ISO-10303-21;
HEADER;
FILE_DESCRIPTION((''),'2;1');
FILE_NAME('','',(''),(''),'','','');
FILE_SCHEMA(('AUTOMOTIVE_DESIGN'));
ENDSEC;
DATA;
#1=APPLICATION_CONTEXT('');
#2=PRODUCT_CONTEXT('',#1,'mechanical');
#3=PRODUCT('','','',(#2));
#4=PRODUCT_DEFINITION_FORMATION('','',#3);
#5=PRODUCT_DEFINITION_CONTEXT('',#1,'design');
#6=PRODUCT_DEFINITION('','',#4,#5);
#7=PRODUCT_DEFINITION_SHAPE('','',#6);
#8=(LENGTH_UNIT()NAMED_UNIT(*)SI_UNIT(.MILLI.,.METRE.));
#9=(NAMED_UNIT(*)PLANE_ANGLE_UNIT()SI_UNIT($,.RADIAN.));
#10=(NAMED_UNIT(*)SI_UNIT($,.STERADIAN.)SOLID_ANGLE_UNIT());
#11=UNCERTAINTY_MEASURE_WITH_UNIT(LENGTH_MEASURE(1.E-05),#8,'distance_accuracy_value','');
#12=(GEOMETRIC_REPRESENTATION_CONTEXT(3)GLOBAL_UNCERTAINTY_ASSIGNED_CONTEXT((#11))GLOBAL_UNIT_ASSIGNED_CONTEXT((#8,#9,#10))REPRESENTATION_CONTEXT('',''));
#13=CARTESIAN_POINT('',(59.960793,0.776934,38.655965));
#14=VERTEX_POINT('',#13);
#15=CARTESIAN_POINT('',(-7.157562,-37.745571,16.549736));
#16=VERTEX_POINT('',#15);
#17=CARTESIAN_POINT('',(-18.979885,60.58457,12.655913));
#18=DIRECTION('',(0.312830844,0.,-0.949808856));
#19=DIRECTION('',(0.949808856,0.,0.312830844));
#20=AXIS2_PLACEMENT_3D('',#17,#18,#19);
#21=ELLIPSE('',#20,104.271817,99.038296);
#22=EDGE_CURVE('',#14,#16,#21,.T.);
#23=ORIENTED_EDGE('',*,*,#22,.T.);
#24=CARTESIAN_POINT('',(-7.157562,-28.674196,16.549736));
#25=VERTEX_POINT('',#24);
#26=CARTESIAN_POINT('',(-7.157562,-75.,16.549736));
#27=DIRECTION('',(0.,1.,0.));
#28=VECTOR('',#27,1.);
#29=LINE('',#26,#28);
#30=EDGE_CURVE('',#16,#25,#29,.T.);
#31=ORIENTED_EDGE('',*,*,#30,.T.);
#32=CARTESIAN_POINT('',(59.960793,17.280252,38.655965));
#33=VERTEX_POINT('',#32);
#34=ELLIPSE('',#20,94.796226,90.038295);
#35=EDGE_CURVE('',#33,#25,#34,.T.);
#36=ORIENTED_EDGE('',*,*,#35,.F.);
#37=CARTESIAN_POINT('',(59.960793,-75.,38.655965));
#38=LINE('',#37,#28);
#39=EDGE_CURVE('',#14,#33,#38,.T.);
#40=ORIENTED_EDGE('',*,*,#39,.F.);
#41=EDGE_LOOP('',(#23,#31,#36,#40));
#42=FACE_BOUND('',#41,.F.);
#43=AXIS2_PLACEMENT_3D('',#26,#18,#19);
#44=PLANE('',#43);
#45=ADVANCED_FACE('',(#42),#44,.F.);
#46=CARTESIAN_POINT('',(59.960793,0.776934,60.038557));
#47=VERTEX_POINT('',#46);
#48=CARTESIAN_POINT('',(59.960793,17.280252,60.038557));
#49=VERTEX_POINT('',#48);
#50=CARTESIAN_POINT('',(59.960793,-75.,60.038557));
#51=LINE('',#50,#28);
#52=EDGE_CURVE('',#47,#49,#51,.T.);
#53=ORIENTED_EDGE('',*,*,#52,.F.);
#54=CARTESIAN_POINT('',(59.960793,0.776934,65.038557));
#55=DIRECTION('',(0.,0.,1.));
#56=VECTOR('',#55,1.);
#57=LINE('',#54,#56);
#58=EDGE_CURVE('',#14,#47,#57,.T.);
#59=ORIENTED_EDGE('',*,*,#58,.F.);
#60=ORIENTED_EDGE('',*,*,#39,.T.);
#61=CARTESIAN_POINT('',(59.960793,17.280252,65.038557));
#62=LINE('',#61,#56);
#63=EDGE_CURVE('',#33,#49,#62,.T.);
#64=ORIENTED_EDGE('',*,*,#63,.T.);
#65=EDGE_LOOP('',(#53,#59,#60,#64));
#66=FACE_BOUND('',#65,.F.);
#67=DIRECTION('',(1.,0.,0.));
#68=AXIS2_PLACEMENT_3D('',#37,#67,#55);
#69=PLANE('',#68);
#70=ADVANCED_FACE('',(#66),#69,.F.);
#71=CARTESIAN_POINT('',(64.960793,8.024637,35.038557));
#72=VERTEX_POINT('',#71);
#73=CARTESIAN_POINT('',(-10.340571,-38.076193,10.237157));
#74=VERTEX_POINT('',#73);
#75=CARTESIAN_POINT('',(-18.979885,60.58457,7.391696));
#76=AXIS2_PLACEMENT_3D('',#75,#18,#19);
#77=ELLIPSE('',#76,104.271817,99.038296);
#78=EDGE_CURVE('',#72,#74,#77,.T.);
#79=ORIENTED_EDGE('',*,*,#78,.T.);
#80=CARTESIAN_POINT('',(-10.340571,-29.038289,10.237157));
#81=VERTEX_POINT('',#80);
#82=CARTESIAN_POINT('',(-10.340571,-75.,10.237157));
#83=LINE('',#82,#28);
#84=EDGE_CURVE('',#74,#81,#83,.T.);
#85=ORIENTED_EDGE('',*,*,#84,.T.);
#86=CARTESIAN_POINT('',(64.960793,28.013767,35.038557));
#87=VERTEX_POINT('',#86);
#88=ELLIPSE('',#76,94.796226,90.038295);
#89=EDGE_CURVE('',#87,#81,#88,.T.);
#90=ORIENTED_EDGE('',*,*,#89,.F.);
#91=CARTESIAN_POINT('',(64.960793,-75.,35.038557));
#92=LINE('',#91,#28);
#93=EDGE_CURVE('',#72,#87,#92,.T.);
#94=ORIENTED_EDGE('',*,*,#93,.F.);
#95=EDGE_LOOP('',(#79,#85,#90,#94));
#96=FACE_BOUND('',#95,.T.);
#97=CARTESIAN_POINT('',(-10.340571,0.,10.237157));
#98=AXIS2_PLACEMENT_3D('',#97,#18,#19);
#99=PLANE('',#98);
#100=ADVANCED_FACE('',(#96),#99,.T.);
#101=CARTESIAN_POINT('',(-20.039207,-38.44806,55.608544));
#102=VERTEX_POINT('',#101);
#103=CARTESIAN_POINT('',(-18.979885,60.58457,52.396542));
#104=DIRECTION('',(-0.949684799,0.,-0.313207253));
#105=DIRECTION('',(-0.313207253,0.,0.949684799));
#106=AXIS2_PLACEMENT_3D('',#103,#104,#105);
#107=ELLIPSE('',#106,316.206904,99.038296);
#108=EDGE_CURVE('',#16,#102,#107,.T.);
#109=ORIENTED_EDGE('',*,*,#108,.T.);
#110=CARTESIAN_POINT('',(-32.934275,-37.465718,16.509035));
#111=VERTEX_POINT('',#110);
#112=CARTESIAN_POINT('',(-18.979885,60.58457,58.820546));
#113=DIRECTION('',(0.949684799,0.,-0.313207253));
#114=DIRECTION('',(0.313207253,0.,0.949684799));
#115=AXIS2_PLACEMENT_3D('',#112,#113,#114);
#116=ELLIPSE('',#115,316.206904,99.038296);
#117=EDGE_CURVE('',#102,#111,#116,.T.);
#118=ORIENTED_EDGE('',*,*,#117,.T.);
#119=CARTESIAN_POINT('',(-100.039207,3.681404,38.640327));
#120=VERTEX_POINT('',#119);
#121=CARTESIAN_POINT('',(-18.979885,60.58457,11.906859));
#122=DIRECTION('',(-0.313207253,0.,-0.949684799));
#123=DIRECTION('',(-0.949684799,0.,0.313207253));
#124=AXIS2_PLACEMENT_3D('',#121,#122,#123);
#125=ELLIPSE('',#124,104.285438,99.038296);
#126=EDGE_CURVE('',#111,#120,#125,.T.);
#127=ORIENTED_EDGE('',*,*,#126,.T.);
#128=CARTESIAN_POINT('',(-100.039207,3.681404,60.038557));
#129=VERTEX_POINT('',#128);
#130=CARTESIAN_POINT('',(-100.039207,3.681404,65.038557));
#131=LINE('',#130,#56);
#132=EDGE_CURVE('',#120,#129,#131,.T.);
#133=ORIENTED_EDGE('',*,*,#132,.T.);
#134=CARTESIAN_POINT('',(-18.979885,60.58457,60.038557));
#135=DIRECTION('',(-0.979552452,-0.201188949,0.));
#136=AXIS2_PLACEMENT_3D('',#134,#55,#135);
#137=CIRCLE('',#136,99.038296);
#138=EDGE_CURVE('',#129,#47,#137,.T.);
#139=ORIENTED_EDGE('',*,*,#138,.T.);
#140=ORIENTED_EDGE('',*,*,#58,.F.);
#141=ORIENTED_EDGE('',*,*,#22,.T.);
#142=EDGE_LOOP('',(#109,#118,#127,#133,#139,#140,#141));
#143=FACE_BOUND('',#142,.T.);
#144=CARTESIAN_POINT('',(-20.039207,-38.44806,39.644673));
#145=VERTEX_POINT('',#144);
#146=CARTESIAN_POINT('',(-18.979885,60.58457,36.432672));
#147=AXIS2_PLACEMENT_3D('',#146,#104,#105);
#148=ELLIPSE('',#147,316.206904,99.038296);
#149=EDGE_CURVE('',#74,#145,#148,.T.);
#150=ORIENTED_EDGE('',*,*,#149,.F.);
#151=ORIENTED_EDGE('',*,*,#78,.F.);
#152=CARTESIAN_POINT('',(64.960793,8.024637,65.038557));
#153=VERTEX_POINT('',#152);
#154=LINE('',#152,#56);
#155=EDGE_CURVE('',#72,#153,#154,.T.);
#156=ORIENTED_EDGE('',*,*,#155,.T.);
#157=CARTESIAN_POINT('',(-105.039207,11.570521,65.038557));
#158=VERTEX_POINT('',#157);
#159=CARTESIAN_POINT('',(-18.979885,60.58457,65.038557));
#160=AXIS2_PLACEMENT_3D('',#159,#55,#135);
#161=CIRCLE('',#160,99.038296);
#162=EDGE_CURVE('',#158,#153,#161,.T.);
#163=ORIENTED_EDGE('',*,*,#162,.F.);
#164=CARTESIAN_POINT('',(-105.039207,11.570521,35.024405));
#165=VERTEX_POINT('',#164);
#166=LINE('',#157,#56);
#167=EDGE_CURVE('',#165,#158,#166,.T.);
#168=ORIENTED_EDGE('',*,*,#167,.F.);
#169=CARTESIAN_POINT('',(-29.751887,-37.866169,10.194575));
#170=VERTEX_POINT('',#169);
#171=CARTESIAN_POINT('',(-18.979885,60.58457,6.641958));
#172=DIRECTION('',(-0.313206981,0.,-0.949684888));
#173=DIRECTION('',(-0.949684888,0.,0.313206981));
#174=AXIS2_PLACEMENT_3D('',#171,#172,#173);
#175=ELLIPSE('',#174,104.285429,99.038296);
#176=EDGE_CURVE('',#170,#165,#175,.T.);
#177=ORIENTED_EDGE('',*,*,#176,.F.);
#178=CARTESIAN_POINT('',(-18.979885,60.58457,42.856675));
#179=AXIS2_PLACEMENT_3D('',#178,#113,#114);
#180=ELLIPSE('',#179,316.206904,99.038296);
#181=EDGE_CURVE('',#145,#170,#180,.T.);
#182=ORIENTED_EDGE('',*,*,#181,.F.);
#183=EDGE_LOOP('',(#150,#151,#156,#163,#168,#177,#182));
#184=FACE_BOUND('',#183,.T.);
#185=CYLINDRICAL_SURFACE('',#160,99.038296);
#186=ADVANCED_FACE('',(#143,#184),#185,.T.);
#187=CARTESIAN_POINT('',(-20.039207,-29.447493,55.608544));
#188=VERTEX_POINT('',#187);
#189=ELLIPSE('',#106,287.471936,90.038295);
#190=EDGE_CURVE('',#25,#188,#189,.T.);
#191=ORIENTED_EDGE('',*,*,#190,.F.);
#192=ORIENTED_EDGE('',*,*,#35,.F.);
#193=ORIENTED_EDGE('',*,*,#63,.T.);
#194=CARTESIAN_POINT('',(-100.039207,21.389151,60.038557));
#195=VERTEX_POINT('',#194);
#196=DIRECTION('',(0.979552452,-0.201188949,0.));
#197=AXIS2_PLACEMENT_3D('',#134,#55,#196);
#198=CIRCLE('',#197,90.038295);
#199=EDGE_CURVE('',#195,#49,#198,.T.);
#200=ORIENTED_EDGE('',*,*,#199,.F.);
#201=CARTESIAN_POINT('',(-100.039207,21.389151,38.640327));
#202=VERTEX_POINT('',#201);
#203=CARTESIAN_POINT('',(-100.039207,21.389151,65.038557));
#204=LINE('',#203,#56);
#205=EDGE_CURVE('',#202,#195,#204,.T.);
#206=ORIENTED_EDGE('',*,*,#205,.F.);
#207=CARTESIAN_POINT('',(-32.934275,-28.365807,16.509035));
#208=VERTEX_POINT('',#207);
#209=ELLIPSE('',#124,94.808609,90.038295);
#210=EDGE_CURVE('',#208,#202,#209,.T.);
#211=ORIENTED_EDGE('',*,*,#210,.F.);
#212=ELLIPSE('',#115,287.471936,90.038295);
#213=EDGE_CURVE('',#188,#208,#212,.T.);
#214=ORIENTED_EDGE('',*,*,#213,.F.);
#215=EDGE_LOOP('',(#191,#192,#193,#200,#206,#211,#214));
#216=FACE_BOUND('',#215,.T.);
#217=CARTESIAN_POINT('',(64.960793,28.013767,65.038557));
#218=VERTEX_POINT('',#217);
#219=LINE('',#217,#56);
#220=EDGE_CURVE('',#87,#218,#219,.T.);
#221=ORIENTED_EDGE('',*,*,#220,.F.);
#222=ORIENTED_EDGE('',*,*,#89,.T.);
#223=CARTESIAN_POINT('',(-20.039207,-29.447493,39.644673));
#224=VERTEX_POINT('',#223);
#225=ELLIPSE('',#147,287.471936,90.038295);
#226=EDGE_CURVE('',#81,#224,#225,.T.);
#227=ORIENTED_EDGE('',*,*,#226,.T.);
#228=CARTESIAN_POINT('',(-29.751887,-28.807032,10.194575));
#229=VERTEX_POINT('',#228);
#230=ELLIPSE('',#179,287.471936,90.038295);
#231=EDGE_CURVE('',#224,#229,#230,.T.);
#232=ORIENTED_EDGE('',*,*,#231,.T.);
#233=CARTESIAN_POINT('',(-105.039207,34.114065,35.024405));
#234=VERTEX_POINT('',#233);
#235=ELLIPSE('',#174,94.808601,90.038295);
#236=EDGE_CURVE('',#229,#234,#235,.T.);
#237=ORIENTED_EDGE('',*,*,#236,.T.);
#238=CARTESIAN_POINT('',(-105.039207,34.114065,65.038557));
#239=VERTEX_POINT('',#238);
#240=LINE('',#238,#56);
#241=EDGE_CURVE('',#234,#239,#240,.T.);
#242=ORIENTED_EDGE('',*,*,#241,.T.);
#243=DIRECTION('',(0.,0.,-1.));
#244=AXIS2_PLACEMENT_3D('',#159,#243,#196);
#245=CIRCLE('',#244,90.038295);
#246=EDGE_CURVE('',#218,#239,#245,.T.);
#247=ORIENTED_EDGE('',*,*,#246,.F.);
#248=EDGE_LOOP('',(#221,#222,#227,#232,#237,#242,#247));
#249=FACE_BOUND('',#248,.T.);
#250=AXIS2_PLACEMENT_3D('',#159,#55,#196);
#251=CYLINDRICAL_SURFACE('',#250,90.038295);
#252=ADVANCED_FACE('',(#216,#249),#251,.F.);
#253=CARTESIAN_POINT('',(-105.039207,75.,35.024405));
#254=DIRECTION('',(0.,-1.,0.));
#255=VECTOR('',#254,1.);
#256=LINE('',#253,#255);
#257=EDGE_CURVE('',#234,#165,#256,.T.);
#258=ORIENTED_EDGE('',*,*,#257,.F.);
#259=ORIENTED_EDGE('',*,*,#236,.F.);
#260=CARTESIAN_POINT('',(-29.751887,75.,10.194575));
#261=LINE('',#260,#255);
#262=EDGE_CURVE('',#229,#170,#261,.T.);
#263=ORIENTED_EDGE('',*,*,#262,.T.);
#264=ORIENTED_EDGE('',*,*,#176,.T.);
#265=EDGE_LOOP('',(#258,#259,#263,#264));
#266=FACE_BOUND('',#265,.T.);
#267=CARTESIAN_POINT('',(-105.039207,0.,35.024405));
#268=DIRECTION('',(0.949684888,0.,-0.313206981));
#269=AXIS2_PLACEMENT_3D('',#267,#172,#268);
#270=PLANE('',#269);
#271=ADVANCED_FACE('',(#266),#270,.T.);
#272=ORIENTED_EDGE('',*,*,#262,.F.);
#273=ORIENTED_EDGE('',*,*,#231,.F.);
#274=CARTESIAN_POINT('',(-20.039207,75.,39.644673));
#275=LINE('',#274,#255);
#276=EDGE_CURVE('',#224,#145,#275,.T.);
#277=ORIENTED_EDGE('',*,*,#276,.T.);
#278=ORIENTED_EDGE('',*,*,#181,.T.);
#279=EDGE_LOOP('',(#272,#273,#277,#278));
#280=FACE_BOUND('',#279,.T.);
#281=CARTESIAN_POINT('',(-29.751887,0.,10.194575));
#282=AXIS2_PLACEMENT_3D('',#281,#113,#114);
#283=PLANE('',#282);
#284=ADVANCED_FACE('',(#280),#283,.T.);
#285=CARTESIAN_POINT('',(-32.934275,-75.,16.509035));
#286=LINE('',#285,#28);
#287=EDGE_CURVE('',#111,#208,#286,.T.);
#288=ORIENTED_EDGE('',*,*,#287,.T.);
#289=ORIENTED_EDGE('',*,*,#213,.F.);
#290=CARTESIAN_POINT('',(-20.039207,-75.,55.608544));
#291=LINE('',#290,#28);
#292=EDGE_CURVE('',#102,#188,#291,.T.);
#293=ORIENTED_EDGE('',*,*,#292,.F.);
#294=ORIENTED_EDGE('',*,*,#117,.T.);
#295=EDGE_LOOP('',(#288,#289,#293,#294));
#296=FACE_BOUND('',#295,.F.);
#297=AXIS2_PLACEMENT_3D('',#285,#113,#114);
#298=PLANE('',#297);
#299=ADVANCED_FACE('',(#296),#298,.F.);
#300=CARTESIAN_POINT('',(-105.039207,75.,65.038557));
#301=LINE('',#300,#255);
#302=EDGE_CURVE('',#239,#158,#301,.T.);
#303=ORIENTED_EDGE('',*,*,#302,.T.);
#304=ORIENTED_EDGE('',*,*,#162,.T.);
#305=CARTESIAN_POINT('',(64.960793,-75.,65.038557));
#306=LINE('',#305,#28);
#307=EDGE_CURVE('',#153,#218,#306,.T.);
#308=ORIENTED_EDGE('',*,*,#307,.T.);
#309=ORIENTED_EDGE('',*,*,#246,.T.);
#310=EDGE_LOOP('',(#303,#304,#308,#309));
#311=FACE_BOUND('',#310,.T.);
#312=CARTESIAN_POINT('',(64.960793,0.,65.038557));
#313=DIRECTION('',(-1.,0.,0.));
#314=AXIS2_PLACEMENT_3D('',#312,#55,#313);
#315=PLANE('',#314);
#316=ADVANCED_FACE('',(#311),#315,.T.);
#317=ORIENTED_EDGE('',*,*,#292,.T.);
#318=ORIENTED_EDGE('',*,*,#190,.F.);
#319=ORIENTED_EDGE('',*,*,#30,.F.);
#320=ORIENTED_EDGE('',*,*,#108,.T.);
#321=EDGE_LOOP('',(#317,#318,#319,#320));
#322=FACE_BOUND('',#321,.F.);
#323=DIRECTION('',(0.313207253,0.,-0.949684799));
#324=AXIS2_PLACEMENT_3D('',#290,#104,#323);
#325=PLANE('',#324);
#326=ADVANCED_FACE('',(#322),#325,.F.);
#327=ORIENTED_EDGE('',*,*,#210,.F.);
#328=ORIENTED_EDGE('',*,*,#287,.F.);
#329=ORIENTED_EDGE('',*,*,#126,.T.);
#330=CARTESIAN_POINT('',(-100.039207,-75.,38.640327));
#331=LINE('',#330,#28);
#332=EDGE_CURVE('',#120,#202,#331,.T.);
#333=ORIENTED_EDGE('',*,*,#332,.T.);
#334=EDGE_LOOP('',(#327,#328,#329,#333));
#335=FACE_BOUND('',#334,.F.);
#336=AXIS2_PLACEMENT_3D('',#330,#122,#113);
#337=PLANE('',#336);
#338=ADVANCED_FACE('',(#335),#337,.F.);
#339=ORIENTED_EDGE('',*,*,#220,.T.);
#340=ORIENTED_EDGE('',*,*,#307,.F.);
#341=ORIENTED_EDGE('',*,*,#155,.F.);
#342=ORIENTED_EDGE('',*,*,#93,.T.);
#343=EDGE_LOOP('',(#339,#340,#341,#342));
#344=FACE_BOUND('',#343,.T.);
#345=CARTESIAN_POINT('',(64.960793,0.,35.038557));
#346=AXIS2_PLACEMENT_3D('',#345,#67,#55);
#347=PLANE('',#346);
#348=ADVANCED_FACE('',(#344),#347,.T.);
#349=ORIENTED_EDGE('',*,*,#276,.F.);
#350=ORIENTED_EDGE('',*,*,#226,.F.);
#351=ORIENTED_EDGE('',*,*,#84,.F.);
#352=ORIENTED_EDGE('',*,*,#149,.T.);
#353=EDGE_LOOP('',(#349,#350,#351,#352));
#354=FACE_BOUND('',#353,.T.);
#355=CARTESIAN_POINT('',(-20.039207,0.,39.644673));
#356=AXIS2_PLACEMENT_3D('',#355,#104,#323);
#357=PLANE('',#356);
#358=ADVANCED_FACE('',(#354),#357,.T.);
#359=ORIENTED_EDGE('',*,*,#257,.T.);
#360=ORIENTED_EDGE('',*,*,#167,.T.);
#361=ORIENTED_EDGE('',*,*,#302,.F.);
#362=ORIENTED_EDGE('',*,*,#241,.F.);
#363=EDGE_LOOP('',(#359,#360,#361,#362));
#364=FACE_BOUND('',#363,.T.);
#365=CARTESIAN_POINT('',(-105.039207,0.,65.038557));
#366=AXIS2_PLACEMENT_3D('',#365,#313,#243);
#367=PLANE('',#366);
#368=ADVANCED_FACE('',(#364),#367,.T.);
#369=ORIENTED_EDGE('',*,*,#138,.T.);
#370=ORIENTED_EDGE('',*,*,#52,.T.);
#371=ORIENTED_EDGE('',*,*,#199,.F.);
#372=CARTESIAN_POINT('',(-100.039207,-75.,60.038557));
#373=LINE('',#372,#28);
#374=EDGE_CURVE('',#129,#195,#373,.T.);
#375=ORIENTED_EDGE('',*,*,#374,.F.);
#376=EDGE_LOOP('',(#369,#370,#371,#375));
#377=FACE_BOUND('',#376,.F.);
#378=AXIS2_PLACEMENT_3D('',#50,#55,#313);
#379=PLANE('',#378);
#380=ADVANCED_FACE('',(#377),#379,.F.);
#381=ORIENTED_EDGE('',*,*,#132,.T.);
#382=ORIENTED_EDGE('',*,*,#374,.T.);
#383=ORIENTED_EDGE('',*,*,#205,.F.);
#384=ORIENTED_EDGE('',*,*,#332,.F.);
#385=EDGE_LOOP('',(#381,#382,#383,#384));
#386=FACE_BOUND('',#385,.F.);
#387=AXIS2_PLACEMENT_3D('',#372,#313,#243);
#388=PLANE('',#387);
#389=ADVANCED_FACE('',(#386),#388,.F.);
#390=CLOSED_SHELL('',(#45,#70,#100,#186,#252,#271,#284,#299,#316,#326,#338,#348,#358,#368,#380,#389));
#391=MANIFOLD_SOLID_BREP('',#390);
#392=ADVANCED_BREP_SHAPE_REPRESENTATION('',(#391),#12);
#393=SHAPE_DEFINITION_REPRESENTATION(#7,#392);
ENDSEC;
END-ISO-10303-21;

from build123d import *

# Parameters (mm, degrees)
F1_DEPTH = 75
F4_DEPTH = 200
F5_DEPTH = 100


# Not quite as in the source:
# - ends of sketch curves that miss each other by under 0.0002 mm in the source are joined


with BuildPart() as f1:
    # F0 (on Front) → F1 (new body, symmetric)
    with BuildSketch(Plane.XZ):
        Polygon((64.9607930725, 65.0385569036), (-20.0392069275, 65.0385569036), (-105.0392069275, 65.0385569036), (-105.0392069275, 35.0244045258), (-29.7518869333, 10.1945746155), (-20.0392069275, 39.6446734667), (-10.3405706844, 10.2371571158), (64.9607930725, 35.0385569036), align=None)
    extrude(amount=F1_DEPTH, both=True)

    # F2 (on face) → F4 (cut)
    with BuildSketch(Plane.XZ.offset(75)):
        Polygon((-100.0392069275, 38.640326764), (-32.9342746626, 16.5090348727), (-20.0392069275, 55.6085438923), (-7.1575624177, 16.5497358238), (59.9607930725, 38.6559645103), (59.9607930725, 60.0385569036), (-100.0392069275, 60.0385569036), align=None)
    extrude(amount=-F4_DEPTH, mode=Mode.SUBTRACT)

    # F3 (on face) → F5 (intersect)
    with BuildSketch(Plane.XY.offset(65.0385569036)):
        with BuildLine():
            Line((-107.177117556, 42.4698600353), (-115.9930899739, 40.6591594219))
            ThreePointArc((-115.9930899739, 40.6591594219), (-18.9798846841, -38.4537255363), (78.0333206058, 40.6591594219))
            Line((78.0333206058, 40.6591594219), (69.2173481878, 42.4698600353))
            ThreePointArc((69.2173481878, 42.4698600353), (-18.9798846841, -29.4537251816), (-107.177117556, 42.4698600353))
        make_face()
    extrude(amount=-F5_DEPTH, mode=Mode.INTERSECT)


solid = f1.part
